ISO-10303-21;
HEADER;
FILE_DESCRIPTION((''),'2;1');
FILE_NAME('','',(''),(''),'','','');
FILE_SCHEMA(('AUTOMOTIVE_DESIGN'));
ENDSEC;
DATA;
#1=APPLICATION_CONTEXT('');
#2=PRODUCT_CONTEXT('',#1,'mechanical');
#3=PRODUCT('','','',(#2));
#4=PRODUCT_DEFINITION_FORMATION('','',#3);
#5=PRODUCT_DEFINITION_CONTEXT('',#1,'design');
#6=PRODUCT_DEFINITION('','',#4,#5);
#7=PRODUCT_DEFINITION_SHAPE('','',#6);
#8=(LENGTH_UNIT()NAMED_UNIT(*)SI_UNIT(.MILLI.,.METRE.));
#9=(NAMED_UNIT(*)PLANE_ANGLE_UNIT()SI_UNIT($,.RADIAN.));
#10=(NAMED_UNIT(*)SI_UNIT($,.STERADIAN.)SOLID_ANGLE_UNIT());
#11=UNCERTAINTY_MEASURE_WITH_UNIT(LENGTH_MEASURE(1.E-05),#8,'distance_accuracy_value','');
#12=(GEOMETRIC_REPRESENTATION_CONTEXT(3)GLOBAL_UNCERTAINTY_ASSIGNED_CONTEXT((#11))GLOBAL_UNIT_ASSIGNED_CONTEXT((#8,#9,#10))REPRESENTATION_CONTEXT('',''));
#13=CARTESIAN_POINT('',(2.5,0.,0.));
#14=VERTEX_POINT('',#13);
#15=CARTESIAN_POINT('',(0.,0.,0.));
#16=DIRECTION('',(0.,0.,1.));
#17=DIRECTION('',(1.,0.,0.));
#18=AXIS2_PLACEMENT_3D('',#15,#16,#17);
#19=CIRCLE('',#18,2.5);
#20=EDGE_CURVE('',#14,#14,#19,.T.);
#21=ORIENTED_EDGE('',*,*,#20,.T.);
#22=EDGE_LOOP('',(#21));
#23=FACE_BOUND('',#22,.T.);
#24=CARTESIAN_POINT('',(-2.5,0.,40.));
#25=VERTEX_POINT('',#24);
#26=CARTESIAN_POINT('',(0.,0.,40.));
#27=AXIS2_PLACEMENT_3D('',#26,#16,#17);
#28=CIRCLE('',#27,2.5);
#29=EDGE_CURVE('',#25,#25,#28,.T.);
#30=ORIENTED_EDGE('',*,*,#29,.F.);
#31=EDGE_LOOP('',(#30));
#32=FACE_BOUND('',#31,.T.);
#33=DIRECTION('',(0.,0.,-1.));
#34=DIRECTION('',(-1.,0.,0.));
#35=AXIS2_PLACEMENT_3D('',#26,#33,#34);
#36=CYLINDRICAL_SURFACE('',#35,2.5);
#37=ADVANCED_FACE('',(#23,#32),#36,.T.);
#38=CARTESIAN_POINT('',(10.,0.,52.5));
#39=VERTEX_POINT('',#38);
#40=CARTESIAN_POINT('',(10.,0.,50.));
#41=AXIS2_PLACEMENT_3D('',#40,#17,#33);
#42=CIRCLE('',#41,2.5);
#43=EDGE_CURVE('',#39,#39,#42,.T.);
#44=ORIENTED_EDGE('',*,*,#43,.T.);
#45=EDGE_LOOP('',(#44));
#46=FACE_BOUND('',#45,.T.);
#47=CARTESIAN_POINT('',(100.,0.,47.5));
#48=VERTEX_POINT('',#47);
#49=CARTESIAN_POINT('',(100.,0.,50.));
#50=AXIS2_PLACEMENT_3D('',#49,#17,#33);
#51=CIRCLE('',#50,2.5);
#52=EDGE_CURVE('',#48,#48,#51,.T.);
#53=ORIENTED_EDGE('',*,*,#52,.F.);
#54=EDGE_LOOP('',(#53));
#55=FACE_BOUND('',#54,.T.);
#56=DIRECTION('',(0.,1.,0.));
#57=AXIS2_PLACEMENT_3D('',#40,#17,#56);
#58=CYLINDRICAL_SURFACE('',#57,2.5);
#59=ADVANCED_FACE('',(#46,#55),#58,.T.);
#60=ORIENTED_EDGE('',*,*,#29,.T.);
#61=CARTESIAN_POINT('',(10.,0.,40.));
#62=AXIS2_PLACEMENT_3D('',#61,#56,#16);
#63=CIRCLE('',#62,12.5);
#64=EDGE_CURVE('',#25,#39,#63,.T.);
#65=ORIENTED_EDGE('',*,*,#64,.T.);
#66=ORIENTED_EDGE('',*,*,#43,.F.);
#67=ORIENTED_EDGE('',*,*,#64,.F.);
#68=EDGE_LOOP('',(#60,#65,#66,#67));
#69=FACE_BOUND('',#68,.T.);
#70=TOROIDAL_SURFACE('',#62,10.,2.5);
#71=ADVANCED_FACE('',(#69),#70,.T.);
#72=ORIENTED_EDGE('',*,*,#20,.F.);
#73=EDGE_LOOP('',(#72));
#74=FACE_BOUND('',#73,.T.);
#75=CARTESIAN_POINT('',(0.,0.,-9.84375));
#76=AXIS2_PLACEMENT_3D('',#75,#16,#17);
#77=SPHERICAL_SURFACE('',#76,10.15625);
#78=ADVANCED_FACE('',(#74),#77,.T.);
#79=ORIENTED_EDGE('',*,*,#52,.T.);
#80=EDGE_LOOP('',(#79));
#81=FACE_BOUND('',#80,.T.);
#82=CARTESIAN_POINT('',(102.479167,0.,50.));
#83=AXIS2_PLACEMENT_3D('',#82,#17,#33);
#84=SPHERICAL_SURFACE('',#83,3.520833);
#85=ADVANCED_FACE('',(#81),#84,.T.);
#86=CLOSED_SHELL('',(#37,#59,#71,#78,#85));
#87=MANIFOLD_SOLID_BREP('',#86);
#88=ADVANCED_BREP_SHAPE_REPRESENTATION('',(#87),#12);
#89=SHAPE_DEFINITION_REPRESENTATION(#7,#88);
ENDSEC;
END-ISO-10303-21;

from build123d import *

# Parameters (mm, degrees)
SKETCH2_R         = 2.5
DOME1_FACE_RADIUS = 2.5
DOME1_HEIGHT      = 6


# Read off the part's stored shape, not the designer's step: Dome2
with BuildPart() as part:
    # Sweep1: sweep along a curve in space
    with BuildLine() as sweep1_path:
        Line((0, 0, 0), (0, 0, 40))
        ThreePointArc((10, 0, 50), (2.928932188, 0, 47.071067812), (0, 0, 40))
        Line((10, 0, 50), (100, 0, 50))
    # Sketch2 → Sweep1 (sweep)
    with BuildSketch(Plane.XY):
        Circle(SKETCH2_R)
    sweep(path=sweep1_path.line)

    # Dome1: a dome of height H over a round flat face of radius A is a cap of a sphere of radius (A * A + H * H) / (2 * H)
    dome1_r = (DOME1_FACE_RADIUS * DOME1_FACE_RADIUS + DOME1_HEIGHT * DOME1_HEIGHT) / (2 * DOME1_HEIGHT)
    dome1_base = Plane((100, 0, 50), z_dir=(1, 0, 0))
    with Locations(dome1_base.offset(DOME1_HEIGHT - dome1_r)):
        dome1_ball = Sphere(dome1_r, mode=Mode.PRIVATE)
    add(split(dome1_ball, bisect_by=dome1_base, keep=Keep.TOP, mode=Mode.PRIVATE))

    # Dome2 outline → Dome2 (revolve)
    with BuildSketch(Plane.XZ):
        with BuildLine():
            Line((0, 3e-09), (0, -20))
            ThreePointArc((0, -20), (10.077822186, -11.10347777), (2.499999995, 2e-09))
            Line((2.499999995, 2e-09), (0, 3e-09))
        make_face()
    revolve(axis=Axis((0, 0, 0), (0, 0, 1)))


solid = part.part
